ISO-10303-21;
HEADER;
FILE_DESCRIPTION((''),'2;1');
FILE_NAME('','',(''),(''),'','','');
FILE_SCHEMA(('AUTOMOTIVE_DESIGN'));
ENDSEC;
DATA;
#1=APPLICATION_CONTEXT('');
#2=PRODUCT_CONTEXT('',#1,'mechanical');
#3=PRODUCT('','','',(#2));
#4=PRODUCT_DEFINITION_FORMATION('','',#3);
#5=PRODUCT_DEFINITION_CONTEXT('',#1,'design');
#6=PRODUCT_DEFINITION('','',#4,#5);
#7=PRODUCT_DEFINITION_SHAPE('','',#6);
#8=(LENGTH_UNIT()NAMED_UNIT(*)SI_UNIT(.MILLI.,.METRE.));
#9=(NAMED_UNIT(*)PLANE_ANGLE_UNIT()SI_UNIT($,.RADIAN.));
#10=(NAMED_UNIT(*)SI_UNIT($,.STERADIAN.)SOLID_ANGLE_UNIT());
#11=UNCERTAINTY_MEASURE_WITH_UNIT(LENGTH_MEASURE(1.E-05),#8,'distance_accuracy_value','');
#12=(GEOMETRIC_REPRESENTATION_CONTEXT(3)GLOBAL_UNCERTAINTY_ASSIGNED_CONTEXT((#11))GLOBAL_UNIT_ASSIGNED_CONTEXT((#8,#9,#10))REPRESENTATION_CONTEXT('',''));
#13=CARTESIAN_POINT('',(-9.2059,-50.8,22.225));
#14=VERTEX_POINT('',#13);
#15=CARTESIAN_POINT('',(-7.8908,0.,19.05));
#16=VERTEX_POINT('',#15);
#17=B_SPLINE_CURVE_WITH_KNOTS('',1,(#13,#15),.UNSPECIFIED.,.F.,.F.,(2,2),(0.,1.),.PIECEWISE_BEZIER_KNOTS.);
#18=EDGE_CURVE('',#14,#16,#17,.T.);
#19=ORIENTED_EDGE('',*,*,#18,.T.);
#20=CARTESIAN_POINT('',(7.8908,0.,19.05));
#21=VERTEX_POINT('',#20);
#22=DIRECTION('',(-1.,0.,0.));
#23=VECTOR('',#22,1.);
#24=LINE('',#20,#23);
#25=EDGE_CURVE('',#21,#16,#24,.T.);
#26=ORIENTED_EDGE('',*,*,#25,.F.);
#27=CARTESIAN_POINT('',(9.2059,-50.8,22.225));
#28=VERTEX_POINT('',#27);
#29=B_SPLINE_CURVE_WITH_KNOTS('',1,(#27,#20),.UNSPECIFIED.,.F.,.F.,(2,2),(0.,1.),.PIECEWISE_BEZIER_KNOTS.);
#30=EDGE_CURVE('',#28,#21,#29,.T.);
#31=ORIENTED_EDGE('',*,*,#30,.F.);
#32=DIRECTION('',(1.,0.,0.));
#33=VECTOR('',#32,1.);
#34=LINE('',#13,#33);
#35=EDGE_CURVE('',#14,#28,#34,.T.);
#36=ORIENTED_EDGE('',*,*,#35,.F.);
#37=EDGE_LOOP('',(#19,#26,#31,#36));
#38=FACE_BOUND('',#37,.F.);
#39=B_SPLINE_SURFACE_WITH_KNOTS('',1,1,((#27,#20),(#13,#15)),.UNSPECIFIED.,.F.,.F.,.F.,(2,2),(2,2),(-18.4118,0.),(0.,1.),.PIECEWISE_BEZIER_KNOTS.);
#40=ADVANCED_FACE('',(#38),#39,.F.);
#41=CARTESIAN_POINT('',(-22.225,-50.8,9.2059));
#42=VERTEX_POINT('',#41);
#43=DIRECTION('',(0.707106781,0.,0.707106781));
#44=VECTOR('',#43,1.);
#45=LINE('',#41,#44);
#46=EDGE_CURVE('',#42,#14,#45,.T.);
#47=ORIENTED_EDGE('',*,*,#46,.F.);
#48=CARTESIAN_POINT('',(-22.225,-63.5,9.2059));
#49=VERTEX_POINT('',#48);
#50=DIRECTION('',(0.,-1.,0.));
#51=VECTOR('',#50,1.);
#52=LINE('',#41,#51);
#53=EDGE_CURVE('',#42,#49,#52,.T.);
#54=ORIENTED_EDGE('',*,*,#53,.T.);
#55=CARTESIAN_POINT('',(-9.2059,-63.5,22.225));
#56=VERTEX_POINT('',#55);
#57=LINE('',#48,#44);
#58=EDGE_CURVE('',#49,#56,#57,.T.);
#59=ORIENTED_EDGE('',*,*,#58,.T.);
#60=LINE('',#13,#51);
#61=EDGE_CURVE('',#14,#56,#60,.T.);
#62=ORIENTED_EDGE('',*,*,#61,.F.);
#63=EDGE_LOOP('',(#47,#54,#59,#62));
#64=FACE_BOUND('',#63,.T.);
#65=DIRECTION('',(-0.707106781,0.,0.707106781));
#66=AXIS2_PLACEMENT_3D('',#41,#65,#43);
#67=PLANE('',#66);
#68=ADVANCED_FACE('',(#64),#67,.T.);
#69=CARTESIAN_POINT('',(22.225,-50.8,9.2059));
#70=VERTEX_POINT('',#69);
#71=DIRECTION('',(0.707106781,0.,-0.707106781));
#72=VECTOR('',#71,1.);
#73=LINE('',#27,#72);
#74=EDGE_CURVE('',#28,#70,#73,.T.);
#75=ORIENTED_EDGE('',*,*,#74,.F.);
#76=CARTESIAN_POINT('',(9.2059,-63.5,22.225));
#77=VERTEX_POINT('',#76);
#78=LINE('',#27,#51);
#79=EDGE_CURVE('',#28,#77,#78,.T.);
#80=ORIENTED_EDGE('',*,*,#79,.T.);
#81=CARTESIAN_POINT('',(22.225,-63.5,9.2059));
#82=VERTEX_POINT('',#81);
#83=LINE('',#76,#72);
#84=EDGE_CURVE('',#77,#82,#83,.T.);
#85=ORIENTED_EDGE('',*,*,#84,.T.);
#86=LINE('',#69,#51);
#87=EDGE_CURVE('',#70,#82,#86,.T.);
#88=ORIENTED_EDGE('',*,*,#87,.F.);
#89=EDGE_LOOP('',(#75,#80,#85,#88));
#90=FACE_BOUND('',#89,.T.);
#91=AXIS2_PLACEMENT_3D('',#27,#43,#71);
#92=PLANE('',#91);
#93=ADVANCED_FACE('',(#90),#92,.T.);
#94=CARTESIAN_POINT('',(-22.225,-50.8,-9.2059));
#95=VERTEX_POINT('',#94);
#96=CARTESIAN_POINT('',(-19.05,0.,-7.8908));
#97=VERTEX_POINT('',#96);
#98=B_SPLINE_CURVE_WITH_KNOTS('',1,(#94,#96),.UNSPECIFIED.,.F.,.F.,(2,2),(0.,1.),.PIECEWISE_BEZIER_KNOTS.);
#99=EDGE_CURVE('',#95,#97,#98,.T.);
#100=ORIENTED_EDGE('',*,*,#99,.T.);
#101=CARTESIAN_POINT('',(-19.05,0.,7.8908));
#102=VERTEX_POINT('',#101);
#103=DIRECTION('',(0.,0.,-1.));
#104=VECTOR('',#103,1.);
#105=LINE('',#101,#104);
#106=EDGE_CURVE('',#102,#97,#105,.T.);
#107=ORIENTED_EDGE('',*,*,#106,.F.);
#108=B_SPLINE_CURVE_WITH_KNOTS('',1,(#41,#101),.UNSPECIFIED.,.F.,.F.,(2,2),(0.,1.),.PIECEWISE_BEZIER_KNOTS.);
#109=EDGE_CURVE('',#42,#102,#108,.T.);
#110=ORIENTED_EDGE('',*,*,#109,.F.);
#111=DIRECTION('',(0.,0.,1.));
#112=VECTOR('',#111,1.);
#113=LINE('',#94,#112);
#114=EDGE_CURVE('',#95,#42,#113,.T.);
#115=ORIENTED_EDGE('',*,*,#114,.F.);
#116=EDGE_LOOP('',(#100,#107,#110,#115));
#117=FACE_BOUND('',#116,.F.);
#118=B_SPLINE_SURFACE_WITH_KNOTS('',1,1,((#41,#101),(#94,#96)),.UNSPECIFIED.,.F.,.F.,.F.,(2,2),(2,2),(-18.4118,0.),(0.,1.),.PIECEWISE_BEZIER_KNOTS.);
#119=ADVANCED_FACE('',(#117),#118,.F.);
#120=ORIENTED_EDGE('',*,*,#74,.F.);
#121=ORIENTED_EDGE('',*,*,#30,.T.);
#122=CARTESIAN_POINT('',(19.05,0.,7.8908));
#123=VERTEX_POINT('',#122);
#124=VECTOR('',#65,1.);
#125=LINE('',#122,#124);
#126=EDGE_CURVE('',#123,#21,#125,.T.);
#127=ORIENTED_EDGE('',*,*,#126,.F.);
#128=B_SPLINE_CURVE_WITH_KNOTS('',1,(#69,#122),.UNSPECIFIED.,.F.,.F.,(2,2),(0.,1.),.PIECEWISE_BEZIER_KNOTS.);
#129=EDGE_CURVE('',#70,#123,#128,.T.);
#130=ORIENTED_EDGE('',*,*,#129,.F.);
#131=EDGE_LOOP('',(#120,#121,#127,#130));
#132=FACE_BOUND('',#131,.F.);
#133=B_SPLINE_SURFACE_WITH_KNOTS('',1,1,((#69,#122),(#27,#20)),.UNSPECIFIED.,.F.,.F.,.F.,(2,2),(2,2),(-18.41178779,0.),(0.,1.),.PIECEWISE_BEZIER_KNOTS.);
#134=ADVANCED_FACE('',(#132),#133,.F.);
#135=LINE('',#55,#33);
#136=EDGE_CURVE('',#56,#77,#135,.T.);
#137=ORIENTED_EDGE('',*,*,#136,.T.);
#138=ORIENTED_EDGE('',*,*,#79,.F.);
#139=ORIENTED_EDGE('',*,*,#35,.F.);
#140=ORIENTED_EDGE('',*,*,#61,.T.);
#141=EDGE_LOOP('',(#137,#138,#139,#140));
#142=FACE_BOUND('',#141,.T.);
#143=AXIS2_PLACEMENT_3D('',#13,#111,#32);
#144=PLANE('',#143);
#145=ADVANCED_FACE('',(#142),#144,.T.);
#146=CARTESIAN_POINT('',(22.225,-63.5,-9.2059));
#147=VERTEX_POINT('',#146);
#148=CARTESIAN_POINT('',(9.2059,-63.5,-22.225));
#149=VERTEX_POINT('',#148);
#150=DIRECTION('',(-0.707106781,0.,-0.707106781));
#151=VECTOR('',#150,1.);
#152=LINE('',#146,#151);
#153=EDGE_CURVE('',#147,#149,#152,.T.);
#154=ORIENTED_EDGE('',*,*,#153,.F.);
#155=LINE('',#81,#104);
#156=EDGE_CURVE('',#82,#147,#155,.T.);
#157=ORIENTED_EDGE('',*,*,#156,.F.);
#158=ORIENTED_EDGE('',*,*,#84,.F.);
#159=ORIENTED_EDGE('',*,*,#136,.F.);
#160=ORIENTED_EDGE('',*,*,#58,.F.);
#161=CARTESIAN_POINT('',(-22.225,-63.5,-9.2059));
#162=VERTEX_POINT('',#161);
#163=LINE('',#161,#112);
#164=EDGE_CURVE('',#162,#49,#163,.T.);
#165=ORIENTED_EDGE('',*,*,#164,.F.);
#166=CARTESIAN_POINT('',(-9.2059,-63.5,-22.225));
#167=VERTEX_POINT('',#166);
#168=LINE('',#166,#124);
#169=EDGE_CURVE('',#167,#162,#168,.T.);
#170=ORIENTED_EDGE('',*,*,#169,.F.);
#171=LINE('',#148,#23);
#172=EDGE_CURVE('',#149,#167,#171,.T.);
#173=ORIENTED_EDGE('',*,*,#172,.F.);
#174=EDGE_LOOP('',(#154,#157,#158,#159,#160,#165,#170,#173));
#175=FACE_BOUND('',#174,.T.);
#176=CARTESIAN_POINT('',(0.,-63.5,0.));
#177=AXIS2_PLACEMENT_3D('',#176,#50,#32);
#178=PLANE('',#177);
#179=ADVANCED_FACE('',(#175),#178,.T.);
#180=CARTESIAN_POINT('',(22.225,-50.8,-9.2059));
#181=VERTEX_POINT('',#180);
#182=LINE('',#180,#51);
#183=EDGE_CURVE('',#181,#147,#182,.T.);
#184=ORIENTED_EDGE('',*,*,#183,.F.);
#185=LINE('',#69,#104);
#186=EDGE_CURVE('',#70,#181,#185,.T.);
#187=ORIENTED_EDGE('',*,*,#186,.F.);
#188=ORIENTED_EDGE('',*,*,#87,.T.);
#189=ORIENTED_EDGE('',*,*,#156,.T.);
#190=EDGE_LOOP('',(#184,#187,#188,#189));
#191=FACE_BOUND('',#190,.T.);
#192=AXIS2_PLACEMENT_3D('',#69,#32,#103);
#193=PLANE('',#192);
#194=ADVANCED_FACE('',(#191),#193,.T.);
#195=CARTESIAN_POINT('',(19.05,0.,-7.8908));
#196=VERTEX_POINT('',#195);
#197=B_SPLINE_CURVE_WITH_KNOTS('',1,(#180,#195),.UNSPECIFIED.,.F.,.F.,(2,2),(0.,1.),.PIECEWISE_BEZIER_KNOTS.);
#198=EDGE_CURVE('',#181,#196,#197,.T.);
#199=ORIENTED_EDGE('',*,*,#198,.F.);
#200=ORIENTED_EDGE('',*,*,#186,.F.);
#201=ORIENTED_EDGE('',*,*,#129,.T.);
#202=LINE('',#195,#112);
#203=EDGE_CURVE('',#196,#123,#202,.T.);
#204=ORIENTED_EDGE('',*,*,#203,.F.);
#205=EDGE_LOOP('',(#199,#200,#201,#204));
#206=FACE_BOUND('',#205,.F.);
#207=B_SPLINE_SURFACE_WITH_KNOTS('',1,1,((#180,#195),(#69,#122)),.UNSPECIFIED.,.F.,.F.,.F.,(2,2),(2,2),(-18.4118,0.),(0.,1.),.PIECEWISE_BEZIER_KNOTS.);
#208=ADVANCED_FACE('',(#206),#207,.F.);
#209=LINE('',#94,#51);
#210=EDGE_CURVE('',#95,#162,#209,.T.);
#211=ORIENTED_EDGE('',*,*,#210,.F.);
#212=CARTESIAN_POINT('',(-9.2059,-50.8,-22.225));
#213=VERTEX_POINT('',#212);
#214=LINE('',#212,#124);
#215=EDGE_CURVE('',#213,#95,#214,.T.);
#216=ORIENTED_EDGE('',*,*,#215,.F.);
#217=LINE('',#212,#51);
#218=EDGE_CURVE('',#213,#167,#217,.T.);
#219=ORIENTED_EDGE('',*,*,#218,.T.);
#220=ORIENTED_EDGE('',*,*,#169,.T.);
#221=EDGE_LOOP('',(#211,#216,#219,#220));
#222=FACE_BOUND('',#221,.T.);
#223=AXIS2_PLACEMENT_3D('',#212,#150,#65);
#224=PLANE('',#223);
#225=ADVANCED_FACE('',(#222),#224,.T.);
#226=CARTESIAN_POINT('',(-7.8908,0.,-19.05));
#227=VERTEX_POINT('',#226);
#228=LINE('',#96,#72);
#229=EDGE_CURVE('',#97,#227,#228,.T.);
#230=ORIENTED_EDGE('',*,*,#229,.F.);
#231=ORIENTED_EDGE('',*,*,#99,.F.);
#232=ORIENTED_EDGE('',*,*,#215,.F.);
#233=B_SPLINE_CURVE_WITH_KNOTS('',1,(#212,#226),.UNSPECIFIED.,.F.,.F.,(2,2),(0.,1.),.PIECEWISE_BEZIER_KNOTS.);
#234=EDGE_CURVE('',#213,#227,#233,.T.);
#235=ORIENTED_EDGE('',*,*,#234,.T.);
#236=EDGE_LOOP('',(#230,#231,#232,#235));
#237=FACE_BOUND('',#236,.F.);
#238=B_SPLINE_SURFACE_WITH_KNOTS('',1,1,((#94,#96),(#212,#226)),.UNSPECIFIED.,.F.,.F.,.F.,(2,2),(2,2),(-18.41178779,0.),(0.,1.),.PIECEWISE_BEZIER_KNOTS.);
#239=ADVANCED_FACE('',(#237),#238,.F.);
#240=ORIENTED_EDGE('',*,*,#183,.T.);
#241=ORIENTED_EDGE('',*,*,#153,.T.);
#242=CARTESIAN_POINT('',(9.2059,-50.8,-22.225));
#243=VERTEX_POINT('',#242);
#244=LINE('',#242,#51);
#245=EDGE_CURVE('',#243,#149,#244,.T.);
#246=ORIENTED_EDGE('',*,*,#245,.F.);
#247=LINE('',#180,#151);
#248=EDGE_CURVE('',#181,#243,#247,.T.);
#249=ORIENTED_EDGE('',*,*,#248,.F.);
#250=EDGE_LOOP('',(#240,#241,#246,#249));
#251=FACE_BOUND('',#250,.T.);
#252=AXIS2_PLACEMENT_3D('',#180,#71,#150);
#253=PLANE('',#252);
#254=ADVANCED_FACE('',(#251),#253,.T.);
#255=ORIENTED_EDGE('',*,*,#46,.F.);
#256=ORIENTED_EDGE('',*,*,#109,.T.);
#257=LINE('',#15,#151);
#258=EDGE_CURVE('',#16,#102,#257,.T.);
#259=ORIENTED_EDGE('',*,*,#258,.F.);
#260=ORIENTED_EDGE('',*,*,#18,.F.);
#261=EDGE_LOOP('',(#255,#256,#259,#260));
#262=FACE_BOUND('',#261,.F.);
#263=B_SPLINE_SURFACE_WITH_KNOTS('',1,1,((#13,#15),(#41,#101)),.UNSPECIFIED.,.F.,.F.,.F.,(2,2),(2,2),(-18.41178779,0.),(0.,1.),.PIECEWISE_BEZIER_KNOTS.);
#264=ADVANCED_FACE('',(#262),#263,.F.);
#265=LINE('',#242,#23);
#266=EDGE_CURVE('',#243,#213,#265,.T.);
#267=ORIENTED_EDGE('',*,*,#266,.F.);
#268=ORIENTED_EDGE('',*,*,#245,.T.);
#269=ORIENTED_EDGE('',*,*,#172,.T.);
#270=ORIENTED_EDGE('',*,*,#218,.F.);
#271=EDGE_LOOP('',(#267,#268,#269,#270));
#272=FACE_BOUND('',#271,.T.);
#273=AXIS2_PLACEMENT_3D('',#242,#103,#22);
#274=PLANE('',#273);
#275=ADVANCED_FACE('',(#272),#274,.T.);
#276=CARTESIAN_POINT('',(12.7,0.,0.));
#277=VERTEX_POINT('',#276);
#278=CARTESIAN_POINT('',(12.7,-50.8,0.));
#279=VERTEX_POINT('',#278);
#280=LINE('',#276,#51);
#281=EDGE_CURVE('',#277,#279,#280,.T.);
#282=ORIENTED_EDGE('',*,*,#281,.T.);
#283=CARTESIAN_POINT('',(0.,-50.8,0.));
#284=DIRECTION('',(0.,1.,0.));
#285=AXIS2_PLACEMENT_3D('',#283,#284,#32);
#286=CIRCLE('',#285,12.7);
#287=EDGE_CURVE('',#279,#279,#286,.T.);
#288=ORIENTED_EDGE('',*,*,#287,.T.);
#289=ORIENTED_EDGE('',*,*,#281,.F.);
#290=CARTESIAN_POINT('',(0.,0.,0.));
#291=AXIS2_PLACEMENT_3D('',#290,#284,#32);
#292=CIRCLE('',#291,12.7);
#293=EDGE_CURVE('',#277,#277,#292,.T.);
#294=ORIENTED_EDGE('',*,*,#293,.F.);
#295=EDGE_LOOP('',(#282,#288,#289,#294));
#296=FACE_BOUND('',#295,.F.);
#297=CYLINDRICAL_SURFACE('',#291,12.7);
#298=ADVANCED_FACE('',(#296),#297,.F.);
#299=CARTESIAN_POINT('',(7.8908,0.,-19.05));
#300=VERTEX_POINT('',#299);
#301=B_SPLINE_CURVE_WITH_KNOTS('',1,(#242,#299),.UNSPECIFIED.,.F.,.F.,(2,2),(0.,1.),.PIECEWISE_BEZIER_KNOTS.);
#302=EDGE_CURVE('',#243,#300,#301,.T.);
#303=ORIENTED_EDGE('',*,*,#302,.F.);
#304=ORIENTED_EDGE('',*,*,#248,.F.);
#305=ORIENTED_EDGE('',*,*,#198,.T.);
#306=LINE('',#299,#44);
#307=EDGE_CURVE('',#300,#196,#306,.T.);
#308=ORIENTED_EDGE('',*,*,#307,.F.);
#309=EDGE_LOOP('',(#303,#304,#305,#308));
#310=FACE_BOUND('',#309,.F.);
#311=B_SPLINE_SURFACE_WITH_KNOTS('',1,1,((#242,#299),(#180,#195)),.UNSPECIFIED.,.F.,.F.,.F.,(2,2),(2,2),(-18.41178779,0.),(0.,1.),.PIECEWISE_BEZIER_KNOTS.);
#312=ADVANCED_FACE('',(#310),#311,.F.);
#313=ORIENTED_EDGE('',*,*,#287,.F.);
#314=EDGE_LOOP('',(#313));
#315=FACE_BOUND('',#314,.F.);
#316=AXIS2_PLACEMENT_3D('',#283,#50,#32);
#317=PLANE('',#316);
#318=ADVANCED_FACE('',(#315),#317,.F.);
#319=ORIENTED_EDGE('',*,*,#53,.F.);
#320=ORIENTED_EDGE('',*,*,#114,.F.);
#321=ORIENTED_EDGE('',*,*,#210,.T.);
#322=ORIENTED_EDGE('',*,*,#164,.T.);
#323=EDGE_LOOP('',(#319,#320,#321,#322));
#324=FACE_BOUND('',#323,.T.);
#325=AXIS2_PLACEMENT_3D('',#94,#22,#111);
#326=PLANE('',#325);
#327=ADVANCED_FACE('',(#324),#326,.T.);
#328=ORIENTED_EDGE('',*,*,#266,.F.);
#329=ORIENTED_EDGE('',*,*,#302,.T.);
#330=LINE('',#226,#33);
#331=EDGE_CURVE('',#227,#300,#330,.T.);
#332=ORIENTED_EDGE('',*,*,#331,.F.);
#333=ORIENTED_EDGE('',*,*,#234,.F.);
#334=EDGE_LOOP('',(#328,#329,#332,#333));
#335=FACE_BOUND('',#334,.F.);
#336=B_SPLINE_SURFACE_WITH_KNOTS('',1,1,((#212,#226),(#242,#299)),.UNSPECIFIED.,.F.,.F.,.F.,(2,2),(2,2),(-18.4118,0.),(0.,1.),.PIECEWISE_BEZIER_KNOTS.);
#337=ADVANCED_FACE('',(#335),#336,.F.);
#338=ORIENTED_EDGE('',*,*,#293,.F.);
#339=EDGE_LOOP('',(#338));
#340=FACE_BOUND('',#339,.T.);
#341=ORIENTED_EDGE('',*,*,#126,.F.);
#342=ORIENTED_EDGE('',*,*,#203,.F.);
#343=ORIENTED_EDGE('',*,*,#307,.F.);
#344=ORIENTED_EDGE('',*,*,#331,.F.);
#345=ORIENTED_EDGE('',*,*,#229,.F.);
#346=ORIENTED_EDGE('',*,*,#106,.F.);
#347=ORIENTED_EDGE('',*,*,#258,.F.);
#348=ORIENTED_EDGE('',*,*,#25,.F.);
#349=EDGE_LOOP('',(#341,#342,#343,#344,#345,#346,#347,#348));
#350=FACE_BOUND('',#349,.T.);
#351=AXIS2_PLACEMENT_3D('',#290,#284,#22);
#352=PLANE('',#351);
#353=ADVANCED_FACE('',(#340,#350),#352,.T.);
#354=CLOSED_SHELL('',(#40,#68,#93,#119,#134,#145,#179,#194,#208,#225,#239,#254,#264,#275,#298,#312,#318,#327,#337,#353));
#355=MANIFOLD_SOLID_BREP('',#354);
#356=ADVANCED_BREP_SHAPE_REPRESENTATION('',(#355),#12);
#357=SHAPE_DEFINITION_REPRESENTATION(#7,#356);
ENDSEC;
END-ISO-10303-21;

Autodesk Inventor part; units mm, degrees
ref_plane "YZ Plane" through (0, 0, 0) normal (1, 0, 0) x (0, 1, 0)
ref_plane "XZ Plane" through (0, 0, 0) normal (0, 1, 0) x (-1, 0, 0)
ref_plane "XY Plane" through (0, 0, 0) normal (0, 0, 1) x (1, 0, 0)
sketch "Sketch1" plane through (0, 0, 0) normal (0, 1, 0) x (-1, 0, 0)
  line L0 (7.8908, 19.05) -> (19.05, 7.8908)
  line L1 (19.05, 7.8908) -> (19.05, -7.8908)
  line L2 (19.05, -7.8908) -> (7.8908, -19.05)
  line L3 (7.8908, -19.05) -> (-7.8908, -19.05)
  line L4 (-7.8908, -19.05) -> (-19.05, -7.8908)
  line L5 (-19.05, -7.8908) -> (-19.05, 7.8908)
  line L6 (-19.05, 7.8908) -> (-7.8908, 19.05)
  line L7 (-7.8908, 19.05) -> (7.8908, 19.05)
  point P0 (0, 0)
  point P1 (0, 0)
  dimension "d5" = 19.05
extrude "Extrusion1" add sketch "Sketch1" against normal blind 50.8
sketch "Sketch4" plane through (0, -50.8, 0) normal (0, -1, 0) x (1, 0, 0)
  line L0 (9.2059, 22.225) -> (22.225, 9.2059)
  line L1 (22.225, 9.2059) -> (22.225, -9.2059)
  line L2 (22.225, -9.2059) -> (9.2059, -22.225)
  line L3 (9.2059, -22.225) -> (-9.2059, -22.225)
  line L4 (-9.2059, -22.225) -> (-22.225, -9.2059)
  line L5 (-22.225, -9.2059) -> (-22.225, 9.2059)
  line L6 (-22.225, 9.2059) -> (-9.2059, 22.225)
  line L7 (-9.2059, 22.225) -> (9.2059, 22.225)
  line L8 (7.8908, 19.05) -> (-7.8908, 19.05) projected
  point P0 (0, 0)
  point P1 (0, 0)
  dimension "d17" = 3.175
loft "Loft1" add profiles "Sketch4" section 2 edges at (-13.4704, 0, 13.4704) (0, 0, 19.05) (13.4704, 0, 13.4704) (19.05, 0, 0) (13.4704, 0, -13.4704) (0, 0, -19.05) (-13.4704, 0, -13.4704) (-19.05, 0, 0)
sketch "Sketch5" plane through (0, 0, 0) normal (0, 1, 0) x (1, 0, 0)
  circle A0 centre (0, 0) radius 12.7
  dimension "d11" = 25.4
extrude "Extrusion2" cut sketch "Sketch5" against normal blind 50.8
ref_plane "Work Plane1" through (0, -50.8, 22.225) normal (1, 0, 0) x (0, 1, 0)
sketch "Sketch6" plane through (0, -50.8, 22.225) normal (1, 0, 0) x (0, 1, 0)
  point P0 (50.8, -22.225)
sketch "Sketch7" plane through (0, -50.8, 22.225) normal (1, 0, 0) x (0, 1, 0)
  point P0 (50.8, -22.225)
sketch "Sketch8" plane through (0, -50.8, 0) normal (0, -1, 0) x (1, 0, 0)
  circle A0 centre (0, 0) radius 12.7 projected
  line L0 (9.2059, 22.225) -> (22.225, 9.2059) projected
  line L1 (-9.2059, 22.225) -> (9.2059, 22.225) projected
  line L2 (-22.225, 9.2059) -> (-9.2059, 22.225) projected
  line L3 (-22.225, -9.2059) -> (-22.225, 9.2059) projected
  line L4 (-9.2059, -22.225) -> (-22.225, -9.2059) projected
  line L5 (9.2059, -22.225) -> (-9.2059, -22.225) projected
  line L6 (22.225, -9.2059) -> (9.2059, -22.225) projected
  line L7 (22.225, 9.2059) -> (22.225, -9.2059) projected
extrude "Extrusion3" add sketch "Sketch8" along normal blind 12.7 contours A0 | L0 L7 L6 L5 L4 L3 L2 L1
sketch "Sketch9" plane through (0, -50.8, 22.225) normal (1, 0, 0) x (0, 1, 0)
  line L0 (-12.7, -31.4309) -> (-12.7, -44.45) construction
  line L1 (-12.7, -13.0191) -> (-12.7, -31.4309) construction
  line L2 (-12.7, 0) -> (-12.7, -13.0191) construction
  line L3 (0, -44.45) -> (-12.7, -44.45) construction
  line L4 (0, -44.45) -> (50.8, -41.275) construction
  line L5 (0, 0) -> (-12.7, 0) construction
  line L6 (0, 0) -> (50.8, -3.175) construction
  line L7 (0, -13.0191) -> (0, 0) construction
  line L8 (0, -34.925) -> (0, -9.525) construction
  line L9 (0, -44.45) -> (0, -31.4309) construction
  line L10 (50.8, -30.1158) -> (50.8, -41.275) construction
  line L11 (50.8, -9.525) -> (50.8, -34.925) construction
  line L12 (50.8, -3.175) -> (50.8, -14.3342) construction
  line L13 (-6.35, 0) -> (-6.35, -44.45) construction
  line L14 (-12.7, -22.225) -> (0, -22.225) construction
  arc A0 (-37.0757, -22.225) -> (-31.6983, -79.4354) centre (269.9482, -22.225) ccw
  line L15 (-37.0757, -22.225) -> (-6.35, -22.225)
  arc A1 (-6.35, -44.45) -> (-24.1759, -60.6977) centre (-5.386, -63.4102) ccw
  point P0 (50.8, -22.225)
properties part number "V1.0"
